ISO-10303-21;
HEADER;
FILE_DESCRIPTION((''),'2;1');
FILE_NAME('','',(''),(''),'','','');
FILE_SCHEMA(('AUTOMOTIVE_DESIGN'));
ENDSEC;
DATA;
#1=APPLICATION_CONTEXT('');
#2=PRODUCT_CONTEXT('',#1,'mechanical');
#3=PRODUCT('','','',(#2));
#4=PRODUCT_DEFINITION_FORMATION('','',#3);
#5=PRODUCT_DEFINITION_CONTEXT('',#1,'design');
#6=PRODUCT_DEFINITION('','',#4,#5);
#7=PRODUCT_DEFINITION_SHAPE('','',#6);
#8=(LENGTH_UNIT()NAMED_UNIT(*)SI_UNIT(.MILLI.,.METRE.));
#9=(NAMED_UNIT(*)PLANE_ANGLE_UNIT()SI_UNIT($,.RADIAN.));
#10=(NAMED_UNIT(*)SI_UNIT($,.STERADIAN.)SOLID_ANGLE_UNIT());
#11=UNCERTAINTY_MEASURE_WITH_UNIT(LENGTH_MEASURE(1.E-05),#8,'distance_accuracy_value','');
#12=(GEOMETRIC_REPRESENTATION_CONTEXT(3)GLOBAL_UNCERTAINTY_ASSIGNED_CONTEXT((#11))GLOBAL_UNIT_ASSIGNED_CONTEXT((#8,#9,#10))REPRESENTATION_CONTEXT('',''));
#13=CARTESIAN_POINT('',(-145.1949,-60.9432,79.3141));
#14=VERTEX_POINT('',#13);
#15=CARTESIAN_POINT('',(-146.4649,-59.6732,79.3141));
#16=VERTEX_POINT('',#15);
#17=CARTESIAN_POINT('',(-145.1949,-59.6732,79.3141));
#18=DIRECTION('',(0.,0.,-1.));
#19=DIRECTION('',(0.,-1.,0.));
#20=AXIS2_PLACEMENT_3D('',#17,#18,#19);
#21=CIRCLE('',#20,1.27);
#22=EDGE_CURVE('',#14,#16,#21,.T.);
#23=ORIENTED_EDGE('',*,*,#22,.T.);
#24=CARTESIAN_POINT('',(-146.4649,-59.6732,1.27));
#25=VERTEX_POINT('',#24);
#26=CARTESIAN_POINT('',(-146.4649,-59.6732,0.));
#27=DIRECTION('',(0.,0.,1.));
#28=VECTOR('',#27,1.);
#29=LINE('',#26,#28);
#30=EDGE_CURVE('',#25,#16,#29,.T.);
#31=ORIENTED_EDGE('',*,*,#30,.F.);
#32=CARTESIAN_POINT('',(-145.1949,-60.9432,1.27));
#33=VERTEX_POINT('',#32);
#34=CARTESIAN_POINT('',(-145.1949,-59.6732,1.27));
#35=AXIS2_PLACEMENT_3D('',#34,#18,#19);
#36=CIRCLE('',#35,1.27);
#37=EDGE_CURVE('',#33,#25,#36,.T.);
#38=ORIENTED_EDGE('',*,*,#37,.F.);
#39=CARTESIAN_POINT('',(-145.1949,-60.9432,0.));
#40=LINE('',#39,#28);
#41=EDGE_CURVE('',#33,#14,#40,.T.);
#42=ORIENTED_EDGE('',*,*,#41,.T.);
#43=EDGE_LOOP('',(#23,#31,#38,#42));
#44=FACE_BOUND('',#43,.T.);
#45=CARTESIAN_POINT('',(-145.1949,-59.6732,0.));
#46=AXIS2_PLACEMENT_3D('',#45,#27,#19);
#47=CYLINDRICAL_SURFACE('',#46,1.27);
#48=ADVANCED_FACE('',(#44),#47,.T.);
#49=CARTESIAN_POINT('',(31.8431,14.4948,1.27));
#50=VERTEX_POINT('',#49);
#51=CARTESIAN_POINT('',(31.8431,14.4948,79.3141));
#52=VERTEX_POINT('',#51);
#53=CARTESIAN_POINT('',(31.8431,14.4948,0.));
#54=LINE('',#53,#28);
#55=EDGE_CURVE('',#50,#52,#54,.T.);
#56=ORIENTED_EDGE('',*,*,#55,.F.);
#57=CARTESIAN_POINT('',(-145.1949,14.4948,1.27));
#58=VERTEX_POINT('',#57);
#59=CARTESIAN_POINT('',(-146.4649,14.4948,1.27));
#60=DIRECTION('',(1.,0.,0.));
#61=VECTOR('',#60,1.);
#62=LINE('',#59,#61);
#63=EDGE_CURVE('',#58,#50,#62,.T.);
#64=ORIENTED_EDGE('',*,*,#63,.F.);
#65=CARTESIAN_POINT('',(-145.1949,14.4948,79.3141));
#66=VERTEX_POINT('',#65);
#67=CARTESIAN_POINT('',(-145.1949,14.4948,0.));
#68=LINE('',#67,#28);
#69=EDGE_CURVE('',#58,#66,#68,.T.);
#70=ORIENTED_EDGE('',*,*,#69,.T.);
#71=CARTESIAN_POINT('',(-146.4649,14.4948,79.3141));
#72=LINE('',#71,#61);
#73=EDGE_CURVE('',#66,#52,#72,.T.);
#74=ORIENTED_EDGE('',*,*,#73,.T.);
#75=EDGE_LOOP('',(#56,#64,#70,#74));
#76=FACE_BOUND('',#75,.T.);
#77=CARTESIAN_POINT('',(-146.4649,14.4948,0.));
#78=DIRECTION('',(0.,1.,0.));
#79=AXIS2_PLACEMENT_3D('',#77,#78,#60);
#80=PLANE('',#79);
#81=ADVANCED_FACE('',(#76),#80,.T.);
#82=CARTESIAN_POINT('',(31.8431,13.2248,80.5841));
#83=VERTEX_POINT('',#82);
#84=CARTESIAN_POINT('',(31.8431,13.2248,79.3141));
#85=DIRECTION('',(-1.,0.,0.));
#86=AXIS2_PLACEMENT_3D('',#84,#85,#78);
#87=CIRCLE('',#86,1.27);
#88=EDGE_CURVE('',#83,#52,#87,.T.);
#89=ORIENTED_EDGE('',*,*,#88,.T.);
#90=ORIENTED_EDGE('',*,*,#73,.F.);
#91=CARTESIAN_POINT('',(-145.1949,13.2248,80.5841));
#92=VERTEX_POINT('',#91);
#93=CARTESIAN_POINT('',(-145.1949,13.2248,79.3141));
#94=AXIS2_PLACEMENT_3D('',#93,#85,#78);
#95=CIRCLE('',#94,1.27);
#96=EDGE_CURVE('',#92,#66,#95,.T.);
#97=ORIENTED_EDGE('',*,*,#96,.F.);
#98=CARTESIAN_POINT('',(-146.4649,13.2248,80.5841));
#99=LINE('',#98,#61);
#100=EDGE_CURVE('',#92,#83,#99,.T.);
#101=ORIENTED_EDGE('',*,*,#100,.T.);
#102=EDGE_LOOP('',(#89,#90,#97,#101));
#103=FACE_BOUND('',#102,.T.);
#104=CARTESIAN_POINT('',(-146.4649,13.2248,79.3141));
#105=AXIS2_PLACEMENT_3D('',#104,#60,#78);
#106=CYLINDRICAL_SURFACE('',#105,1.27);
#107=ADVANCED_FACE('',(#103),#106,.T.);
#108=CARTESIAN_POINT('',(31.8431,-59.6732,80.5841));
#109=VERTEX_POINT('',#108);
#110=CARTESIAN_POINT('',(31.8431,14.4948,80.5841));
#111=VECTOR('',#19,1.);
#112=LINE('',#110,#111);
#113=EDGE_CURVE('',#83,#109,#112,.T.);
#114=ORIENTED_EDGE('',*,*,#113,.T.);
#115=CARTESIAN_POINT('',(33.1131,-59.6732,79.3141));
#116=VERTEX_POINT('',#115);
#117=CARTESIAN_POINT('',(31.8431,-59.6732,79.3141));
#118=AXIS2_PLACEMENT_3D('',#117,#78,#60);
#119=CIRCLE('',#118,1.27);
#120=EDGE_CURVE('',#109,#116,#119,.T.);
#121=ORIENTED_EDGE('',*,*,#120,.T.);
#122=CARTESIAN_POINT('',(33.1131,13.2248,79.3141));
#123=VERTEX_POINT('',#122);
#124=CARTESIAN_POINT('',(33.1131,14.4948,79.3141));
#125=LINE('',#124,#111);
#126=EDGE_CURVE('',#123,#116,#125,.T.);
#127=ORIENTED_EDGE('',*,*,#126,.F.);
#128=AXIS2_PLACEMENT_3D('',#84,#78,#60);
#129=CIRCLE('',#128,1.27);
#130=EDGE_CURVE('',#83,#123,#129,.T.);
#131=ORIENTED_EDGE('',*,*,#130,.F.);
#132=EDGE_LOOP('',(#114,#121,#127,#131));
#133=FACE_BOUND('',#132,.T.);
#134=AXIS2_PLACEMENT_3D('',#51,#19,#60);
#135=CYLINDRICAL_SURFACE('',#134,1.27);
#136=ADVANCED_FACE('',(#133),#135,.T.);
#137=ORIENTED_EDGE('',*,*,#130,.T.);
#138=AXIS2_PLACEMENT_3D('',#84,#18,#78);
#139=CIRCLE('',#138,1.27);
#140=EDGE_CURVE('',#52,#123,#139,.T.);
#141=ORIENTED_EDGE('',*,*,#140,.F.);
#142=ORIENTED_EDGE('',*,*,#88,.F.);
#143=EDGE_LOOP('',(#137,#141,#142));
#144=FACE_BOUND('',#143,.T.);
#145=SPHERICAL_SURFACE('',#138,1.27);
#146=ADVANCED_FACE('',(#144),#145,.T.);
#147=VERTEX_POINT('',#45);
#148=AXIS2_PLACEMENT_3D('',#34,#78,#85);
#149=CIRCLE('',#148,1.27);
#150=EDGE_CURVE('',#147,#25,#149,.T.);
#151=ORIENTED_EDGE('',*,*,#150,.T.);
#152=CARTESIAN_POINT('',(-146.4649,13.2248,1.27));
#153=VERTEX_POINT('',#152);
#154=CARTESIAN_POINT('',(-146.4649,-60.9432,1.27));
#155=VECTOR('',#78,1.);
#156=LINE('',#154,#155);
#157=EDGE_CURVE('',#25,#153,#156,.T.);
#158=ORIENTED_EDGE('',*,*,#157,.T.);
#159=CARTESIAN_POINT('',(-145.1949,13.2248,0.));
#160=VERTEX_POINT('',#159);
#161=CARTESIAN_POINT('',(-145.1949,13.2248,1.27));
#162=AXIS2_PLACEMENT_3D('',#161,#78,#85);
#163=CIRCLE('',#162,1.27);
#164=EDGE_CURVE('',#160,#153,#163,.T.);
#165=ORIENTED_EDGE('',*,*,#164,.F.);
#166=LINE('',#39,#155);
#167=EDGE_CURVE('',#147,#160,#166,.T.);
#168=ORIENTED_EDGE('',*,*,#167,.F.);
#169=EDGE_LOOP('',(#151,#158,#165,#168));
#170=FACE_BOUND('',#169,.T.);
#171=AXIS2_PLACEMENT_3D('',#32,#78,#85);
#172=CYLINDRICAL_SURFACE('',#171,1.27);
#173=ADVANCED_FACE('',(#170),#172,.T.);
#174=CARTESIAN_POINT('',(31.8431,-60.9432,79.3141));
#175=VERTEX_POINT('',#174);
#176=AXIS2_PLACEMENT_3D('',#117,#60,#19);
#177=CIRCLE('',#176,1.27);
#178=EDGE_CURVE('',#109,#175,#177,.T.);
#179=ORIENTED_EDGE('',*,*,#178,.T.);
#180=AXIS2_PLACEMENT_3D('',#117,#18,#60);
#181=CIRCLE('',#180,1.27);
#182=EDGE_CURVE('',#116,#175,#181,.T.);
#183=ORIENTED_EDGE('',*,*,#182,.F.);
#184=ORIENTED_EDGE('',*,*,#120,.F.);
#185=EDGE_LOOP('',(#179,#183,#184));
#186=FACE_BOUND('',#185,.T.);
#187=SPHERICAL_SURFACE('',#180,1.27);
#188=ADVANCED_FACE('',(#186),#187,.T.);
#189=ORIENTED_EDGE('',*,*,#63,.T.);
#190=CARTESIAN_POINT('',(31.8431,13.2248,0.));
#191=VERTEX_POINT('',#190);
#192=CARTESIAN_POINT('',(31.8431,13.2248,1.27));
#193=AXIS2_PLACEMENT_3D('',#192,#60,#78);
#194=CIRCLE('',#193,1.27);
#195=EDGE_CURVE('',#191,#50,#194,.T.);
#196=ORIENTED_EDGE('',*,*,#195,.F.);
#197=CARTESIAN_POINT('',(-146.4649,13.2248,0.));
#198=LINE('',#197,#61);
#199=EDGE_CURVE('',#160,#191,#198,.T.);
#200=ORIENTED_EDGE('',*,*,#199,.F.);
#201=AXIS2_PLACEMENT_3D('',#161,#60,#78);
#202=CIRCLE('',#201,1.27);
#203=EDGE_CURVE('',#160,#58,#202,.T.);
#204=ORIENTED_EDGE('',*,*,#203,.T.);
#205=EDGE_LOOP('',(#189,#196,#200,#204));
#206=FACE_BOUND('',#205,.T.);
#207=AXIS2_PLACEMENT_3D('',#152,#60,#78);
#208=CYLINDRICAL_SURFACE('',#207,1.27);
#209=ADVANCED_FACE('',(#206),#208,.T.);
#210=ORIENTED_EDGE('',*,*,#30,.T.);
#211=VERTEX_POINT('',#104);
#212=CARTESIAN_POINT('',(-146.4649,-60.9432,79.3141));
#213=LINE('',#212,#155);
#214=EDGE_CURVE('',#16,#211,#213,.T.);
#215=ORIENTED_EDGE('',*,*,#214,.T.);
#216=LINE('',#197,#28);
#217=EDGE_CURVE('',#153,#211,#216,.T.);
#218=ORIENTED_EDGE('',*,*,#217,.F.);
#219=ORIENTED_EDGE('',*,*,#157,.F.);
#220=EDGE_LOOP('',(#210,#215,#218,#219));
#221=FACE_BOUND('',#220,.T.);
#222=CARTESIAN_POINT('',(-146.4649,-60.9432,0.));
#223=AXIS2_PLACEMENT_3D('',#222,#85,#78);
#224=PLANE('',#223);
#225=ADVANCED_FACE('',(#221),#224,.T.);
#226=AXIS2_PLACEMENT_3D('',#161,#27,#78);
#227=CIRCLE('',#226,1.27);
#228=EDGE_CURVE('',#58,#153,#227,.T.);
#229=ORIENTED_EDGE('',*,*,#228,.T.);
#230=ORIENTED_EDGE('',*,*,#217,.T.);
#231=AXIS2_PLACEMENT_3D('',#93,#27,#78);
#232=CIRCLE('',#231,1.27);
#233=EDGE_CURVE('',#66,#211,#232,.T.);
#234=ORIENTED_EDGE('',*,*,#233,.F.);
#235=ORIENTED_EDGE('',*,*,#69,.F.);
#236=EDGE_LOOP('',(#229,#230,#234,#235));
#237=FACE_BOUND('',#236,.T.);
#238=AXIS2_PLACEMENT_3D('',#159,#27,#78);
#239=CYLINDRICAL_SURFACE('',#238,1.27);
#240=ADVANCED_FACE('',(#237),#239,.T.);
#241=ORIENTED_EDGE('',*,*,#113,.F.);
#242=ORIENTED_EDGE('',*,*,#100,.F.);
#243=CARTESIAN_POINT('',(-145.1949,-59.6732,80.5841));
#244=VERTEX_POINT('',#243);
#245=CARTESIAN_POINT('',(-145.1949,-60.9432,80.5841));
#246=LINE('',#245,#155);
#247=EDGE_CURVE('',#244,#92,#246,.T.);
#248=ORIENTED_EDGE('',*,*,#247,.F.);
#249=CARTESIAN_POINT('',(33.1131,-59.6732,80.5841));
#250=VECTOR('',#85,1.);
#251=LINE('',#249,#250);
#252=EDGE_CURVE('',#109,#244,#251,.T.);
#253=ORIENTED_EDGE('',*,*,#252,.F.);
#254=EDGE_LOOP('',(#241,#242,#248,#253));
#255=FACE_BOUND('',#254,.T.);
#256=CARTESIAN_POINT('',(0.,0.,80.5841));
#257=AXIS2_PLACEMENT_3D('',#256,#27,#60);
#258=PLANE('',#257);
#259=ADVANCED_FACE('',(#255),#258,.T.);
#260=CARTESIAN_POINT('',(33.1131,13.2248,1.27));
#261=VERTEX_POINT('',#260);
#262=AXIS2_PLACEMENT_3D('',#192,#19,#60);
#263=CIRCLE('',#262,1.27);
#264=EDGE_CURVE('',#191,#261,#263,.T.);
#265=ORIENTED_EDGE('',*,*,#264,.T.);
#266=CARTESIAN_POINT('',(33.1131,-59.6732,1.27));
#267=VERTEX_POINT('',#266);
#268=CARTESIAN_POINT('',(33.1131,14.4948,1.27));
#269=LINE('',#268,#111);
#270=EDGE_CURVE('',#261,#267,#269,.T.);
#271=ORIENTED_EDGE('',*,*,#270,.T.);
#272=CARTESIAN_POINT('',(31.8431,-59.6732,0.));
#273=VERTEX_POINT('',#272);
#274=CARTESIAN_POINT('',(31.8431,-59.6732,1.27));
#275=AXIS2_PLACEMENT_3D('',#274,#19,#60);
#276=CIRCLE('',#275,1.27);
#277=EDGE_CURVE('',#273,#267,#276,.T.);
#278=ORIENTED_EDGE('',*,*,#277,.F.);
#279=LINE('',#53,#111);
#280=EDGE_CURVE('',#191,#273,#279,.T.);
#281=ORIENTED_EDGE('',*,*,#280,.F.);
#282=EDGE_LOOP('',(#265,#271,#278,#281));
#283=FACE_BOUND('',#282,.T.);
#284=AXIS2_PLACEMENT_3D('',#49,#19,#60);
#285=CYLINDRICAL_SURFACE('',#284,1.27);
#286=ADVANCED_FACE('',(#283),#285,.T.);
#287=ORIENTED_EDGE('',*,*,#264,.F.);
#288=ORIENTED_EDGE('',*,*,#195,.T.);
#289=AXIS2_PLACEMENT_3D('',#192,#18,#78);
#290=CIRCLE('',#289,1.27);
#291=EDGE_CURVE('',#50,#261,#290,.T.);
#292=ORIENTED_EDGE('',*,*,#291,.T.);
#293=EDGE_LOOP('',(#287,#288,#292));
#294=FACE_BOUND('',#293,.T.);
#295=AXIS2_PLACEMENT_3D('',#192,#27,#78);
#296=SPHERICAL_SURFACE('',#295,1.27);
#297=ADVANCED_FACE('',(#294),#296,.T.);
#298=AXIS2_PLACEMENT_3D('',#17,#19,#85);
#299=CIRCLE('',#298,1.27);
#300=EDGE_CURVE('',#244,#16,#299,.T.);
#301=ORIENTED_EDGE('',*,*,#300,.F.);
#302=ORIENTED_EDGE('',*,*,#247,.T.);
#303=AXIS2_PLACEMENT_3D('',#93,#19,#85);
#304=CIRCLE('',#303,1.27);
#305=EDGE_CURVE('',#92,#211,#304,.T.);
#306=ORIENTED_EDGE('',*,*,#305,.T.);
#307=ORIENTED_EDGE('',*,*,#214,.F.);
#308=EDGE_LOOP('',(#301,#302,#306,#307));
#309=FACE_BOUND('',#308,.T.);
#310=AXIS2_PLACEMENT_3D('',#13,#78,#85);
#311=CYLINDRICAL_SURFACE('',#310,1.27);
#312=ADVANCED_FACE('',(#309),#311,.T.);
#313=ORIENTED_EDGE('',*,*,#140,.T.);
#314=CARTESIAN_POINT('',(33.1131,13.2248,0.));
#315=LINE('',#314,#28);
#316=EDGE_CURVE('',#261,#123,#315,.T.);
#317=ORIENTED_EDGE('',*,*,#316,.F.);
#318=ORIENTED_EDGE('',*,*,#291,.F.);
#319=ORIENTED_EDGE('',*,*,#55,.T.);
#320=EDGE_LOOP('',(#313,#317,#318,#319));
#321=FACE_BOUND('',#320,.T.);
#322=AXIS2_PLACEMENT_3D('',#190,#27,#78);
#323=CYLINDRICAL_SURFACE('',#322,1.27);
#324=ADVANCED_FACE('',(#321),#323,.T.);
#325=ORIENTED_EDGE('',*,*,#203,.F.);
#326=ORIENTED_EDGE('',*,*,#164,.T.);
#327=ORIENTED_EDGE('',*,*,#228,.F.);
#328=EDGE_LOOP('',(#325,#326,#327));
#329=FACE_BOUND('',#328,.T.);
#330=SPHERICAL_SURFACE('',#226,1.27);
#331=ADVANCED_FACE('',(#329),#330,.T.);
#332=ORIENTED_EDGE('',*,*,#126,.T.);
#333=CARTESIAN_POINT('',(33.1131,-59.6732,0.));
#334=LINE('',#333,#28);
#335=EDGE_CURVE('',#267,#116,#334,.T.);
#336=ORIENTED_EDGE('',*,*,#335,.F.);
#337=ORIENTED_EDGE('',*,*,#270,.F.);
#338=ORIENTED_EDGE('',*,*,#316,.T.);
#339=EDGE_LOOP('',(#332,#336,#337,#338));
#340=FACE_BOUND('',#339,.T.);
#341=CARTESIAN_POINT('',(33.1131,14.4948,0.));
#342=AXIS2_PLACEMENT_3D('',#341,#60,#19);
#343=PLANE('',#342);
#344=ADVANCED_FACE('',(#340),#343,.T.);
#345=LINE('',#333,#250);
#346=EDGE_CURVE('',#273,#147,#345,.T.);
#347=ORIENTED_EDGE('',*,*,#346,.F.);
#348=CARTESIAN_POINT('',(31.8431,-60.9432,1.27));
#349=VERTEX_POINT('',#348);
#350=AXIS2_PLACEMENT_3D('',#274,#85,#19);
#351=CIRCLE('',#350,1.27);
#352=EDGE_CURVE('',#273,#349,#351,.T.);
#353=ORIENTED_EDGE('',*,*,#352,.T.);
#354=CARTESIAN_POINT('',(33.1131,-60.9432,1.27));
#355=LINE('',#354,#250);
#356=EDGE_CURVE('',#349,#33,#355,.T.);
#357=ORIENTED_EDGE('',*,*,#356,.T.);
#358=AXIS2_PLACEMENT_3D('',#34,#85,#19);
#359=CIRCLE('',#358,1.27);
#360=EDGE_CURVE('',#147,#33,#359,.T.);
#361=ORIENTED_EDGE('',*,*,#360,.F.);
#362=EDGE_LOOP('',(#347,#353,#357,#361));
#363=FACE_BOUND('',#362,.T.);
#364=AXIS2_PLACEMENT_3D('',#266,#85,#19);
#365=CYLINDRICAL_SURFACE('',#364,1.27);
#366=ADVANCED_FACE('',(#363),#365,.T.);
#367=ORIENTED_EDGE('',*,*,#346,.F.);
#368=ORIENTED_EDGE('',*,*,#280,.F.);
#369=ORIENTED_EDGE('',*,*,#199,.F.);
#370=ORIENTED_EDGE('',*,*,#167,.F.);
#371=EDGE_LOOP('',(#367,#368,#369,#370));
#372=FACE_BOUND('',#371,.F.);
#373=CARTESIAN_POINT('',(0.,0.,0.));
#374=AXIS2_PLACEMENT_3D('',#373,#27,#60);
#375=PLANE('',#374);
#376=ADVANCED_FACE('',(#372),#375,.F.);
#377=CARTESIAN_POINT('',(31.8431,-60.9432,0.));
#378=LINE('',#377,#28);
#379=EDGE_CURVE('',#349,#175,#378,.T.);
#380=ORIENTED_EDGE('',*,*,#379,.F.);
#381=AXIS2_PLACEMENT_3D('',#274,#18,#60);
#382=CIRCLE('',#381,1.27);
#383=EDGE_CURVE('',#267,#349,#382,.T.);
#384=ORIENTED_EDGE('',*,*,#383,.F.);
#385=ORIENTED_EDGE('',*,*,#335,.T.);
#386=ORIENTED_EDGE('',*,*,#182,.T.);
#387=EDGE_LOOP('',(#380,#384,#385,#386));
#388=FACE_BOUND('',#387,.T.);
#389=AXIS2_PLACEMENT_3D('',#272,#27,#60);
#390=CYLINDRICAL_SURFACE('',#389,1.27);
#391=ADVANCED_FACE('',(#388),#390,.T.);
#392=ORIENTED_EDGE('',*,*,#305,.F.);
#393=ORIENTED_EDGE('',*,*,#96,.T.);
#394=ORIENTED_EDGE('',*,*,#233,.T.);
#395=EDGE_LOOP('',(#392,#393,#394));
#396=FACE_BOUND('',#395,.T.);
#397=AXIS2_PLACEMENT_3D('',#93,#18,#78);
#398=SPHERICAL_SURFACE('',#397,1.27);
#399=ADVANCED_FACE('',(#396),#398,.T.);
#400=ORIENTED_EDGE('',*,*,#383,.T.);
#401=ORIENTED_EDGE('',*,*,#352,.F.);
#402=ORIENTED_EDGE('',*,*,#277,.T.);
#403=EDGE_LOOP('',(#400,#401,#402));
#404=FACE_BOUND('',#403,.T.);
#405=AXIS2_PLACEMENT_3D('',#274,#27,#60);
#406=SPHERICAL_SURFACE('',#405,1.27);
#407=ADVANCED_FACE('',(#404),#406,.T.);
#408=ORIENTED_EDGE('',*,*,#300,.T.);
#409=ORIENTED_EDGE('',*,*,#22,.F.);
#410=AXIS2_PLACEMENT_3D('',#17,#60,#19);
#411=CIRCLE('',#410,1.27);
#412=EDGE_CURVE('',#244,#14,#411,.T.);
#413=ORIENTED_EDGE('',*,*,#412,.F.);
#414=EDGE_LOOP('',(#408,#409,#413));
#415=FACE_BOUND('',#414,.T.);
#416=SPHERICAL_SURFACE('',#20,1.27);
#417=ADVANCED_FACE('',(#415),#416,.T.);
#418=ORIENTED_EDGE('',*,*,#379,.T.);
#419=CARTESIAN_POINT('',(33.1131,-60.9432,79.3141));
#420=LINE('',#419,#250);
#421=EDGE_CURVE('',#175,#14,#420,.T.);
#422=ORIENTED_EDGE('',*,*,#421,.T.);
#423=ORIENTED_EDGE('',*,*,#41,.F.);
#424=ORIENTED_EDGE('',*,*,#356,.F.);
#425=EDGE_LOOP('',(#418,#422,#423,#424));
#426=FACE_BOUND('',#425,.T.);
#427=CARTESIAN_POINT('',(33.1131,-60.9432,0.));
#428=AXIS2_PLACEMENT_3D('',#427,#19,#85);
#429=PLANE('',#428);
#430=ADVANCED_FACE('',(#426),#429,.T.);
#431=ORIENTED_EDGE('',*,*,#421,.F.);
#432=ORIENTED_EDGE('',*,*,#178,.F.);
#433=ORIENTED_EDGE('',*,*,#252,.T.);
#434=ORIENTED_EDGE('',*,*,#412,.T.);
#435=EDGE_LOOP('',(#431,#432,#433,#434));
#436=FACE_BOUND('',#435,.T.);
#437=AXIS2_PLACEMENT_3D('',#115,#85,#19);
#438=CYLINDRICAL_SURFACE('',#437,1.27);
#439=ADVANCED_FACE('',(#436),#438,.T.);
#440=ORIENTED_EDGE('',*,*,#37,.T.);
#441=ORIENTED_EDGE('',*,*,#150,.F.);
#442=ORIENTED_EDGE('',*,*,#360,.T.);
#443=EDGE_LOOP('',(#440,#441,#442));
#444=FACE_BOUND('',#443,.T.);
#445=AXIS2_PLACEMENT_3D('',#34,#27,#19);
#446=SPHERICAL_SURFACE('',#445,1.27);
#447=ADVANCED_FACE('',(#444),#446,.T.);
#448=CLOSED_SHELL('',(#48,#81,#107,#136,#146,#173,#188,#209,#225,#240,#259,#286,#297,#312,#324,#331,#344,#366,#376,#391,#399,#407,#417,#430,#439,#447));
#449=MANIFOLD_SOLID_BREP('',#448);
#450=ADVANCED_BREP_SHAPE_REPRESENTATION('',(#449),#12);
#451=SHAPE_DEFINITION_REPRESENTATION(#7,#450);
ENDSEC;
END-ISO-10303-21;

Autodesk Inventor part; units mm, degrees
ref_plane "YZ Plane" through (0, 0, 0) normal (1, 0, 0) x (0, 1, 0)
ref_plane "XZ Plane" through (0, 0, 0) normal (0, 1, 0) x (-1, 0, 0)
ref_plane "XY Plane" through (0, 0, 0) normal (0, 0, 1) x (1, 0, 0)
sketch "Sketch1" plane through (0, 0, 0) normal (0, 0, 1) x (1, 0, 0)
  line L0 (-146.4649, 14.4948) -> (33.1131, 14.4948)
  line L1 (33.1131, 14.4948) -> (33.1131, -60.9432)
  line L2 (33.1131, -60.9432) -> (-146.4649, -60.9432)
  line L3 (-146.4649, -60.9432) -> (-146.4649, 14.4948)
  line L4 (30.5731, 14.7488) -> (-143.9249, 14.7488) projected
  line L5 (-143.9249, -61.1972) -> (30.5731, -61.1972) projected
  line L6 (-147.2269, 11.4468) -> (-147.2269, -57.8952) projected
  point P0 (0, 0)
  point P1 (-146.4649, -23.2242)
  point P2 (-147.2269, -23.2242)
  point P3 (-56.6759, 14.4948)
  point P4 (-56.6759, 14.7488)
  dimension "d0" = 179.578
  dimension "d1" = 75.438
extrude "Extrusion1" add sketch "Sketch1" along normal blind 80.5841
fillet "Fillet1" radius 1.27 12 edges at (-146.4649, 14.4948, 40.292) (33.1131, 14.4948, 40.292) (-56.6759, 14.4948, 0) (-56.6759, 14.4948, 80.5841) (33.1131, -60.9432, 40.292) (33.1131, -23.2242, 0) (33.1131, -23.2242, 80.5841) (-146.4649, -60.9432, 40.292) (-56.6759, -60.9432, 0) (-56.6759, -60.9432, 80.5841) (-146.4649, -23.2242, 0) (-146.4649, -23.2242, 80.5841)
properties part number "Electrical_Yuasa_Np18-12_Middle"
